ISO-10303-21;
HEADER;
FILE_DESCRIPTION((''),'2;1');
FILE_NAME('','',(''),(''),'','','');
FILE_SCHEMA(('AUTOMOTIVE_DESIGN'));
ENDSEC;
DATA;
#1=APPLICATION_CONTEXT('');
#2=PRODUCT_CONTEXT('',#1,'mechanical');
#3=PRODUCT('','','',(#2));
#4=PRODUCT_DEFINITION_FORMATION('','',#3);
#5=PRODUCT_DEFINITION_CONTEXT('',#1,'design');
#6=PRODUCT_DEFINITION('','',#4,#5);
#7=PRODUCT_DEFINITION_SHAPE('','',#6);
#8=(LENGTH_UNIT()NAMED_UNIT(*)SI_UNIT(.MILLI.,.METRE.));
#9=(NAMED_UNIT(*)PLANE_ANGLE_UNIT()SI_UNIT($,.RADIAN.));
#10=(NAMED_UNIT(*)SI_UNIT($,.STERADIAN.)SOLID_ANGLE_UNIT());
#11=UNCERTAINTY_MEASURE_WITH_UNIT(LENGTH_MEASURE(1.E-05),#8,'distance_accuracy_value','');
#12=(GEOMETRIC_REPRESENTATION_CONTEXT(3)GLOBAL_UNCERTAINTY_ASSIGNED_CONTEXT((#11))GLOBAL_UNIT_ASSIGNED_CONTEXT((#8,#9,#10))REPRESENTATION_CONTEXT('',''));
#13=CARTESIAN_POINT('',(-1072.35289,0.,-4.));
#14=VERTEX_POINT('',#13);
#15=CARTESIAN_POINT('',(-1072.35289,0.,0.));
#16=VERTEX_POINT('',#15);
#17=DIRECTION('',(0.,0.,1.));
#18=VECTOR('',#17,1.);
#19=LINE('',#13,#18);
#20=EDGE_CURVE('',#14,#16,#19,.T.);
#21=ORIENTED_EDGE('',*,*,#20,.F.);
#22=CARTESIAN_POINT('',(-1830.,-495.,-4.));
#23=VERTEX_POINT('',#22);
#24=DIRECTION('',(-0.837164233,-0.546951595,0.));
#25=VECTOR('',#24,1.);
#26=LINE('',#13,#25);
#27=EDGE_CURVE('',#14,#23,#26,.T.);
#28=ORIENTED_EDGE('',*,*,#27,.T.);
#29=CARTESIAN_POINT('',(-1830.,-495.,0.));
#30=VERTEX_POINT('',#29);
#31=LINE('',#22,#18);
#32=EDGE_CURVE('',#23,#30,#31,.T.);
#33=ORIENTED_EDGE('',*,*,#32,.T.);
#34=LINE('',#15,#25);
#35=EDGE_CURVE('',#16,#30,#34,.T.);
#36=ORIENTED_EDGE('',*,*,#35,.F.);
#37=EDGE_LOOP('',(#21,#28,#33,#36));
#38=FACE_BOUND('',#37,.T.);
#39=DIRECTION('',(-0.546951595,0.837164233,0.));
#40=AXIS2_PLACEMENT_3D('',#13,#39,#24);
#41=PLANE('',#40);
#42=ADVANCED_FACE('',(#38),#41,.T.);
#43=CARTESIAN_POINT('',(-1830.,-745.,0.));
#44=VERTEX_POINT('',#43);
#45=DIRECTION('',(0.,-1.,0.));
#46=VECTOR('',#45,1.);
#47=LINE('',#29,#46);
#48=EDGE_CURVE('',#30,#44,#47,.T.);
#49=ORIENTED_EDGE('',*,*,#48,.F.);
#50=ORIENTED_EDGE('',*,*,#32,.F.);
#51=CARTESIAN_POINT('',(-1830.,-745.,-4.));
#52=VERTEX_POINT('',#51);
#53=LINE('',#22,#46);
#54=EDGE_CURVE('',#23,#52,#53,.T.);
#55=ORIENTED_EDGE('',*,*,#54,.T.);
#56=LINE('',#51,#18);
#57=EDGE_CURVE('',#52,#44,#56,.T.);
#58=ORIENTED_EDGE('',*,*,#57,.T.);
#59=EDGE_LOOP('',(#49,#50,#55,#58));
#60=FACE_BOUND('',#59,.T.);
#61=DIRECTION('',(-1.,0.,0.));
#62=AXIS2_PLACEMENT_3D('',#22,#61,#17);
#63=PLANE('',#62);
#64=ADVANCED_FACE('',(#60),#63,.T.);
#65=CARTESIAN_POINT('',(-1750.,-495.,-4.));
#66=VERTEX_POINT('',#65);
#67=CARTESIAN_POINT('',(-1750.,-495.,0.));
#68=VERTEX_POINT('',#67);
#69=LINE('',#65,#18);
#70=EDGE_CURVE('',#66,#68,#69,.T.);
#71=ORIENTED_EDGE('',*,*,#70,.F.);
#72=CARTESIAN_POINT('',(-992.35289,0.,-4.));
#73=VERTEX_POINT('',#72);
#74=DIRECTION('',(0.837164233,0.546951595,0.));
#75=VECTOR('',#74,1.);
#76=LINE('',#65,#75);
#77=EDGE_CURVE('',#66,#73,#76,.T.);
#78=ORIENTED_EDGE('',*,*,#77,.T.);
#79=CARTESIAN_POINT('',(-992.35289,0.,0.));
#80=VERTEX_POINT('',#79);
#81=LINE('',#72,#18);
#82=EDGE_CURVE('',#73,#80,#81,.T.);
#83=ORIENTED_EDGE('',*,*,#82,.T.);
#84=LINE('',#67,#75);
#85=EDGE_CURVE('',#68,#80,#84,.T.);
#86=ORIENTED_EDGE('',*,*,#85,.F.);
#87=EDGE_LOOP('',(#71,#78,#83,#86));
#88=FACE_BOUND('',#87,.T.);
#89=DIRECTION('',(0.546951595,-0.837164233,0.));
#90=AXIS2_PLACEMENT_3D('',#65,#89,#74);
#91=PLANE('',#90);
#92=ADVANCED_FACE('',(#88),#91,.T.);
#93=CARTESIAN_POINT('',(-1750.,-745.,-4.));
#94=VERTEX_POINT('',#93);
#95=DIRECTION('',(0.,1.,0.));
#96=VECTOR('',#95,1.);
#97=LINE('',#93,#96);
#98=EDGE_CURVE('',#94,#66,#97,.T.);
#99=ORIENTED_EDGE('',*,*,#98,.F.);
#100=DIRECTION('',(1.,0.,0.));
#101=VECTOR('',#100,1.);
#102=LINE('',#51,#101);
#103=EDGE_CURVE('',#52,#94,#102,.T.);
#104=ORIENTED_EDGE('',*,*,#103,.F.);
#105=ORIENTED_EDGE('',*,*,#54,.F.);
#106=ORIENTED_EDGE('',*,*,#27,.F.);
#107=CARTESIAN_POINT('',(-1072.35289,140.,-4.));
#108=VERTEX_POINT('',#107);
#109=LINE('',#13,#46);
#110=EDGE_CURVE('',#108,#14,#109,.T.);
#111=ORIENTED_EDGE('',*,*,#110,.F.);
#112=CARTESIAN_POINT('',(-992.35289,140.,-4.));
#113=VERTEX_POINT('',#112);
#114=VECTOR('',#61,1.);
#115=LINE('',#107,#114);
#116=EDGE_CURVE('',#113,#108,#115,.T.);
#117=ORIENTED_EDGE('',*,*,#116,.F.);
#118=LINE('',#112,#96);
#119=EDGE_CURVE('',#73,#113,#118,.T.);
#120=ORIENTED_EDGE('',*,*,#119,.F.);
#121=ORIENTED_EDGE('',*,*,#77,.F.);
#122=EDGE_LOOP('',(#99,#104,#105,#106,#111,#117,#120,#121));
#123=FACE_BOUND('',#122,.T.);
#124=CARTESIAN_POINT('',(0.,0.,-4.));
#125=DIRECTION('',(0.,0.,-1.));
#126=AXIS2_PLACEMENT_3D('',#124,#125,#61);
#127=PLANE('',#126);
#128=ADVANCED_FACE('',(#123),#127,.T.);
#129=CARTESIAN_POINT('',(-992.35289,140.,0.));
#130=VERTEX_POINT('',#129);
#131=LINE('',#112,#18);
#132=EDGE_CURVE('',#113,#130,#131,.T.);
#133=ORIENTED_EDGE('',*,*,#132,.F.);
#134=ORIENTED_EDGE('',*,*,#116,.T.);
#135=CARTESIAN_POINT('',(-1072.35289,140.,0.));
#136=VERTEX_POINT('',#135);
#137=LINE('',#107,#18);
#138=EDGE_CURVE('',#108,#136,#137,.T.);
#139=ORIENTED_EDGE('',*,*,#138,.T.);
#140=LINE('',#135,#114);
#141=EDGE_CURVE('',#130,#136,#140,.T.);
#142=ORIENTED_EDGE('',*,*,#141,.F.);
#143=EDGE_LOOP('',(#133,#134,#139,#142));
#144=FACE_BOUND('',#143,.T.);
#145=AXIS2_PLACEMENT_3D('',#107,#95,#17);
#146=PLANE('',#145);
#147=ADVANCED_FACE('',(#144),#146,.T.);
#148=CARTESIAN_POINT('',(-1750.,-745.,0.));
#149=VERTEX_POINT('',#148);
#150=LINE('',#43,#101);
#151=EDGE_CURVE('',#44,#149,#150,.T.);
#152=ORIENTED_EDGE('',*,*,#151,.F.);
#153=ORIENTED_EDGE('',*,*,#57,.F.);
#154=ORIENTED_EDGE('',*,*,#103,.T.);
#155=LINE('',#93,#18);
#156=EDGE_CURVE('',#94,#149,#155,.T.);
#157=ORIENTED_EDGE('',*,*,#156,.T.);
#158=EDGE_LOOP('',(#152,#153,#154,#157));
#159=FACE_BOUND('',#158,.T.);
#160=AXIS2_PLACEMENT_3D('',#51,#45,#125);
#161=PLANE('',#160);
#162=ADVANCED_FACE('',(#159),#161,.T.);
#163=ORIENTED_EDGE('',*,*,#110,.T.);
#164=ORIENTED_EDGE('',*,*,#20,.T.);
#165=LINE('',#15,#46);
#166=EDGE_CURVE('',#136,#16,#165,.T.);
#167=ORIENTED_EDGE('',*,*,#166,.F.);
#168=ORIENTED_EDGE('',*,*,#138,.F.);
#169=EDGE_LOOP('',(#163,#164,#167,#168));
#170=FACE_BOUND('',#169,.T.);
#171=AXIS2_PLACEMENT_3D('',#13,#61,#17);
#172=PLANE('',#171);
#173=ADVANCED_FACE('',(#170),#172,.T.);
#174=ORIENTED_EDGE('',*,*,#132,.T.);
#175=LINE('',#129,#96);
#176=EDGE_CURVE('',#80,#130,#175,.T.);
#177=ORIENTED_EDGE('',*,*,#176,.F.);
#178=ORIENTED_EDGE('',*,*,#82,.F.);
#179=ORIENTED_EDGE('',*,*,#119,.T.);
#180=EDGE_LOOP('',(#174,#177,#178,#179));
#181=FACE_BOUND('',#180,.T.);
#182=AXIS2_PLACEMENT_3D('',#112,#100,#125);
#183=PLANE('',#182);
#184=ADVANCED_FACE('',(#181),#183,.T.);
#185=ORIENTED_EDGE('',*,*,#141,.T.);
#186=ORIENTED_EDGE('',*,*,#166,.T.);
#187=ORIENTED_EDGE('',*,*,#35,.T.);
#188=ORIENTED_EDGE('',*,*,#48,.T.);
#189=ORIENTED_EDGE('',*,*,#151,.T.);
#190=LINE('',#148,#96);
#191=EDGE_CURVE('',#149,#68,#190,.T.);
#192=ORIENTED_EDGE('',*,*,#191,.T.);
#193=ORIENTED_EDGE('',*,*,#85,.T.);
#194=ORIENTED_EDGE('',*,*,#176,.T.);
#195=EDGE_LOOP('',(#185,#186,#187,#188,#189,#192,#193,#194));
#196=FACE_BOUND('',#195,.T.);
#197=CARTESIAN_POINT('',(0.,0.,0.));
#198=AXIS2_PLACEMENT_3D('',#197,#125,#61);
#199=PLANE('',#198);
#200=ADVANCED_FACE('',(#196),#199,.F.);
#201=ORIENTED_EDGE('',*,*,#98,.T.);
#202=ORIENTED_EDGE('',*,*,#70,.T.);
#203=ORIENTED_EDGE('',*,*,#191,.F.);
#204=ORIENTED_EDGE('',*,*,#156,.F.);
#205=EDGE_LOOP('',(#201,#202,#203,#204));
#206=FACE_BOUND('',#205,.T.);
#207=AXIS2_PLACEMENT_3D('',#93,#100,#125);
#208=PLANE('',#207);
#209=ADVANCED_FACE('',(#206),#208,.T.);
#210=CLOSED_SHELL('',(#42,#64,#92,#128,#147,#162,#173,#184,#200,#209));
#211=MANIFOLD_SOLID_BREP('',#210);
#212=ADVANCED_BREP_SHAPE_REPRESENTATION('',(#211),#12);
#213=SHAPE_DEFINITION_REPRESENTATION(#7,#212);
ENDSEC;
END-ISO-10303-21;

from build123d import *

# Parameters (mm, degrees)
SM_BASE_FLANGE_1_DEPTH = 4


# Sheet-metal steps are written as plain solids
with BuildPart() as part:
    # 草图8 → 基体-法兰1 (new body)
    with BuildSketch(Plane.XY):
        Polygon((-1072.352889995, 0), (-1830, -495), (-1830, -745), (-1750, -745), (-1750, -495), (-992.352889995, 0), (-992.352889995, 140), (-1072.352889995, 140), align=None)
    extrude(amount=-SM_BASE_FLANGE_1_DEPTH)


solid = part.part
